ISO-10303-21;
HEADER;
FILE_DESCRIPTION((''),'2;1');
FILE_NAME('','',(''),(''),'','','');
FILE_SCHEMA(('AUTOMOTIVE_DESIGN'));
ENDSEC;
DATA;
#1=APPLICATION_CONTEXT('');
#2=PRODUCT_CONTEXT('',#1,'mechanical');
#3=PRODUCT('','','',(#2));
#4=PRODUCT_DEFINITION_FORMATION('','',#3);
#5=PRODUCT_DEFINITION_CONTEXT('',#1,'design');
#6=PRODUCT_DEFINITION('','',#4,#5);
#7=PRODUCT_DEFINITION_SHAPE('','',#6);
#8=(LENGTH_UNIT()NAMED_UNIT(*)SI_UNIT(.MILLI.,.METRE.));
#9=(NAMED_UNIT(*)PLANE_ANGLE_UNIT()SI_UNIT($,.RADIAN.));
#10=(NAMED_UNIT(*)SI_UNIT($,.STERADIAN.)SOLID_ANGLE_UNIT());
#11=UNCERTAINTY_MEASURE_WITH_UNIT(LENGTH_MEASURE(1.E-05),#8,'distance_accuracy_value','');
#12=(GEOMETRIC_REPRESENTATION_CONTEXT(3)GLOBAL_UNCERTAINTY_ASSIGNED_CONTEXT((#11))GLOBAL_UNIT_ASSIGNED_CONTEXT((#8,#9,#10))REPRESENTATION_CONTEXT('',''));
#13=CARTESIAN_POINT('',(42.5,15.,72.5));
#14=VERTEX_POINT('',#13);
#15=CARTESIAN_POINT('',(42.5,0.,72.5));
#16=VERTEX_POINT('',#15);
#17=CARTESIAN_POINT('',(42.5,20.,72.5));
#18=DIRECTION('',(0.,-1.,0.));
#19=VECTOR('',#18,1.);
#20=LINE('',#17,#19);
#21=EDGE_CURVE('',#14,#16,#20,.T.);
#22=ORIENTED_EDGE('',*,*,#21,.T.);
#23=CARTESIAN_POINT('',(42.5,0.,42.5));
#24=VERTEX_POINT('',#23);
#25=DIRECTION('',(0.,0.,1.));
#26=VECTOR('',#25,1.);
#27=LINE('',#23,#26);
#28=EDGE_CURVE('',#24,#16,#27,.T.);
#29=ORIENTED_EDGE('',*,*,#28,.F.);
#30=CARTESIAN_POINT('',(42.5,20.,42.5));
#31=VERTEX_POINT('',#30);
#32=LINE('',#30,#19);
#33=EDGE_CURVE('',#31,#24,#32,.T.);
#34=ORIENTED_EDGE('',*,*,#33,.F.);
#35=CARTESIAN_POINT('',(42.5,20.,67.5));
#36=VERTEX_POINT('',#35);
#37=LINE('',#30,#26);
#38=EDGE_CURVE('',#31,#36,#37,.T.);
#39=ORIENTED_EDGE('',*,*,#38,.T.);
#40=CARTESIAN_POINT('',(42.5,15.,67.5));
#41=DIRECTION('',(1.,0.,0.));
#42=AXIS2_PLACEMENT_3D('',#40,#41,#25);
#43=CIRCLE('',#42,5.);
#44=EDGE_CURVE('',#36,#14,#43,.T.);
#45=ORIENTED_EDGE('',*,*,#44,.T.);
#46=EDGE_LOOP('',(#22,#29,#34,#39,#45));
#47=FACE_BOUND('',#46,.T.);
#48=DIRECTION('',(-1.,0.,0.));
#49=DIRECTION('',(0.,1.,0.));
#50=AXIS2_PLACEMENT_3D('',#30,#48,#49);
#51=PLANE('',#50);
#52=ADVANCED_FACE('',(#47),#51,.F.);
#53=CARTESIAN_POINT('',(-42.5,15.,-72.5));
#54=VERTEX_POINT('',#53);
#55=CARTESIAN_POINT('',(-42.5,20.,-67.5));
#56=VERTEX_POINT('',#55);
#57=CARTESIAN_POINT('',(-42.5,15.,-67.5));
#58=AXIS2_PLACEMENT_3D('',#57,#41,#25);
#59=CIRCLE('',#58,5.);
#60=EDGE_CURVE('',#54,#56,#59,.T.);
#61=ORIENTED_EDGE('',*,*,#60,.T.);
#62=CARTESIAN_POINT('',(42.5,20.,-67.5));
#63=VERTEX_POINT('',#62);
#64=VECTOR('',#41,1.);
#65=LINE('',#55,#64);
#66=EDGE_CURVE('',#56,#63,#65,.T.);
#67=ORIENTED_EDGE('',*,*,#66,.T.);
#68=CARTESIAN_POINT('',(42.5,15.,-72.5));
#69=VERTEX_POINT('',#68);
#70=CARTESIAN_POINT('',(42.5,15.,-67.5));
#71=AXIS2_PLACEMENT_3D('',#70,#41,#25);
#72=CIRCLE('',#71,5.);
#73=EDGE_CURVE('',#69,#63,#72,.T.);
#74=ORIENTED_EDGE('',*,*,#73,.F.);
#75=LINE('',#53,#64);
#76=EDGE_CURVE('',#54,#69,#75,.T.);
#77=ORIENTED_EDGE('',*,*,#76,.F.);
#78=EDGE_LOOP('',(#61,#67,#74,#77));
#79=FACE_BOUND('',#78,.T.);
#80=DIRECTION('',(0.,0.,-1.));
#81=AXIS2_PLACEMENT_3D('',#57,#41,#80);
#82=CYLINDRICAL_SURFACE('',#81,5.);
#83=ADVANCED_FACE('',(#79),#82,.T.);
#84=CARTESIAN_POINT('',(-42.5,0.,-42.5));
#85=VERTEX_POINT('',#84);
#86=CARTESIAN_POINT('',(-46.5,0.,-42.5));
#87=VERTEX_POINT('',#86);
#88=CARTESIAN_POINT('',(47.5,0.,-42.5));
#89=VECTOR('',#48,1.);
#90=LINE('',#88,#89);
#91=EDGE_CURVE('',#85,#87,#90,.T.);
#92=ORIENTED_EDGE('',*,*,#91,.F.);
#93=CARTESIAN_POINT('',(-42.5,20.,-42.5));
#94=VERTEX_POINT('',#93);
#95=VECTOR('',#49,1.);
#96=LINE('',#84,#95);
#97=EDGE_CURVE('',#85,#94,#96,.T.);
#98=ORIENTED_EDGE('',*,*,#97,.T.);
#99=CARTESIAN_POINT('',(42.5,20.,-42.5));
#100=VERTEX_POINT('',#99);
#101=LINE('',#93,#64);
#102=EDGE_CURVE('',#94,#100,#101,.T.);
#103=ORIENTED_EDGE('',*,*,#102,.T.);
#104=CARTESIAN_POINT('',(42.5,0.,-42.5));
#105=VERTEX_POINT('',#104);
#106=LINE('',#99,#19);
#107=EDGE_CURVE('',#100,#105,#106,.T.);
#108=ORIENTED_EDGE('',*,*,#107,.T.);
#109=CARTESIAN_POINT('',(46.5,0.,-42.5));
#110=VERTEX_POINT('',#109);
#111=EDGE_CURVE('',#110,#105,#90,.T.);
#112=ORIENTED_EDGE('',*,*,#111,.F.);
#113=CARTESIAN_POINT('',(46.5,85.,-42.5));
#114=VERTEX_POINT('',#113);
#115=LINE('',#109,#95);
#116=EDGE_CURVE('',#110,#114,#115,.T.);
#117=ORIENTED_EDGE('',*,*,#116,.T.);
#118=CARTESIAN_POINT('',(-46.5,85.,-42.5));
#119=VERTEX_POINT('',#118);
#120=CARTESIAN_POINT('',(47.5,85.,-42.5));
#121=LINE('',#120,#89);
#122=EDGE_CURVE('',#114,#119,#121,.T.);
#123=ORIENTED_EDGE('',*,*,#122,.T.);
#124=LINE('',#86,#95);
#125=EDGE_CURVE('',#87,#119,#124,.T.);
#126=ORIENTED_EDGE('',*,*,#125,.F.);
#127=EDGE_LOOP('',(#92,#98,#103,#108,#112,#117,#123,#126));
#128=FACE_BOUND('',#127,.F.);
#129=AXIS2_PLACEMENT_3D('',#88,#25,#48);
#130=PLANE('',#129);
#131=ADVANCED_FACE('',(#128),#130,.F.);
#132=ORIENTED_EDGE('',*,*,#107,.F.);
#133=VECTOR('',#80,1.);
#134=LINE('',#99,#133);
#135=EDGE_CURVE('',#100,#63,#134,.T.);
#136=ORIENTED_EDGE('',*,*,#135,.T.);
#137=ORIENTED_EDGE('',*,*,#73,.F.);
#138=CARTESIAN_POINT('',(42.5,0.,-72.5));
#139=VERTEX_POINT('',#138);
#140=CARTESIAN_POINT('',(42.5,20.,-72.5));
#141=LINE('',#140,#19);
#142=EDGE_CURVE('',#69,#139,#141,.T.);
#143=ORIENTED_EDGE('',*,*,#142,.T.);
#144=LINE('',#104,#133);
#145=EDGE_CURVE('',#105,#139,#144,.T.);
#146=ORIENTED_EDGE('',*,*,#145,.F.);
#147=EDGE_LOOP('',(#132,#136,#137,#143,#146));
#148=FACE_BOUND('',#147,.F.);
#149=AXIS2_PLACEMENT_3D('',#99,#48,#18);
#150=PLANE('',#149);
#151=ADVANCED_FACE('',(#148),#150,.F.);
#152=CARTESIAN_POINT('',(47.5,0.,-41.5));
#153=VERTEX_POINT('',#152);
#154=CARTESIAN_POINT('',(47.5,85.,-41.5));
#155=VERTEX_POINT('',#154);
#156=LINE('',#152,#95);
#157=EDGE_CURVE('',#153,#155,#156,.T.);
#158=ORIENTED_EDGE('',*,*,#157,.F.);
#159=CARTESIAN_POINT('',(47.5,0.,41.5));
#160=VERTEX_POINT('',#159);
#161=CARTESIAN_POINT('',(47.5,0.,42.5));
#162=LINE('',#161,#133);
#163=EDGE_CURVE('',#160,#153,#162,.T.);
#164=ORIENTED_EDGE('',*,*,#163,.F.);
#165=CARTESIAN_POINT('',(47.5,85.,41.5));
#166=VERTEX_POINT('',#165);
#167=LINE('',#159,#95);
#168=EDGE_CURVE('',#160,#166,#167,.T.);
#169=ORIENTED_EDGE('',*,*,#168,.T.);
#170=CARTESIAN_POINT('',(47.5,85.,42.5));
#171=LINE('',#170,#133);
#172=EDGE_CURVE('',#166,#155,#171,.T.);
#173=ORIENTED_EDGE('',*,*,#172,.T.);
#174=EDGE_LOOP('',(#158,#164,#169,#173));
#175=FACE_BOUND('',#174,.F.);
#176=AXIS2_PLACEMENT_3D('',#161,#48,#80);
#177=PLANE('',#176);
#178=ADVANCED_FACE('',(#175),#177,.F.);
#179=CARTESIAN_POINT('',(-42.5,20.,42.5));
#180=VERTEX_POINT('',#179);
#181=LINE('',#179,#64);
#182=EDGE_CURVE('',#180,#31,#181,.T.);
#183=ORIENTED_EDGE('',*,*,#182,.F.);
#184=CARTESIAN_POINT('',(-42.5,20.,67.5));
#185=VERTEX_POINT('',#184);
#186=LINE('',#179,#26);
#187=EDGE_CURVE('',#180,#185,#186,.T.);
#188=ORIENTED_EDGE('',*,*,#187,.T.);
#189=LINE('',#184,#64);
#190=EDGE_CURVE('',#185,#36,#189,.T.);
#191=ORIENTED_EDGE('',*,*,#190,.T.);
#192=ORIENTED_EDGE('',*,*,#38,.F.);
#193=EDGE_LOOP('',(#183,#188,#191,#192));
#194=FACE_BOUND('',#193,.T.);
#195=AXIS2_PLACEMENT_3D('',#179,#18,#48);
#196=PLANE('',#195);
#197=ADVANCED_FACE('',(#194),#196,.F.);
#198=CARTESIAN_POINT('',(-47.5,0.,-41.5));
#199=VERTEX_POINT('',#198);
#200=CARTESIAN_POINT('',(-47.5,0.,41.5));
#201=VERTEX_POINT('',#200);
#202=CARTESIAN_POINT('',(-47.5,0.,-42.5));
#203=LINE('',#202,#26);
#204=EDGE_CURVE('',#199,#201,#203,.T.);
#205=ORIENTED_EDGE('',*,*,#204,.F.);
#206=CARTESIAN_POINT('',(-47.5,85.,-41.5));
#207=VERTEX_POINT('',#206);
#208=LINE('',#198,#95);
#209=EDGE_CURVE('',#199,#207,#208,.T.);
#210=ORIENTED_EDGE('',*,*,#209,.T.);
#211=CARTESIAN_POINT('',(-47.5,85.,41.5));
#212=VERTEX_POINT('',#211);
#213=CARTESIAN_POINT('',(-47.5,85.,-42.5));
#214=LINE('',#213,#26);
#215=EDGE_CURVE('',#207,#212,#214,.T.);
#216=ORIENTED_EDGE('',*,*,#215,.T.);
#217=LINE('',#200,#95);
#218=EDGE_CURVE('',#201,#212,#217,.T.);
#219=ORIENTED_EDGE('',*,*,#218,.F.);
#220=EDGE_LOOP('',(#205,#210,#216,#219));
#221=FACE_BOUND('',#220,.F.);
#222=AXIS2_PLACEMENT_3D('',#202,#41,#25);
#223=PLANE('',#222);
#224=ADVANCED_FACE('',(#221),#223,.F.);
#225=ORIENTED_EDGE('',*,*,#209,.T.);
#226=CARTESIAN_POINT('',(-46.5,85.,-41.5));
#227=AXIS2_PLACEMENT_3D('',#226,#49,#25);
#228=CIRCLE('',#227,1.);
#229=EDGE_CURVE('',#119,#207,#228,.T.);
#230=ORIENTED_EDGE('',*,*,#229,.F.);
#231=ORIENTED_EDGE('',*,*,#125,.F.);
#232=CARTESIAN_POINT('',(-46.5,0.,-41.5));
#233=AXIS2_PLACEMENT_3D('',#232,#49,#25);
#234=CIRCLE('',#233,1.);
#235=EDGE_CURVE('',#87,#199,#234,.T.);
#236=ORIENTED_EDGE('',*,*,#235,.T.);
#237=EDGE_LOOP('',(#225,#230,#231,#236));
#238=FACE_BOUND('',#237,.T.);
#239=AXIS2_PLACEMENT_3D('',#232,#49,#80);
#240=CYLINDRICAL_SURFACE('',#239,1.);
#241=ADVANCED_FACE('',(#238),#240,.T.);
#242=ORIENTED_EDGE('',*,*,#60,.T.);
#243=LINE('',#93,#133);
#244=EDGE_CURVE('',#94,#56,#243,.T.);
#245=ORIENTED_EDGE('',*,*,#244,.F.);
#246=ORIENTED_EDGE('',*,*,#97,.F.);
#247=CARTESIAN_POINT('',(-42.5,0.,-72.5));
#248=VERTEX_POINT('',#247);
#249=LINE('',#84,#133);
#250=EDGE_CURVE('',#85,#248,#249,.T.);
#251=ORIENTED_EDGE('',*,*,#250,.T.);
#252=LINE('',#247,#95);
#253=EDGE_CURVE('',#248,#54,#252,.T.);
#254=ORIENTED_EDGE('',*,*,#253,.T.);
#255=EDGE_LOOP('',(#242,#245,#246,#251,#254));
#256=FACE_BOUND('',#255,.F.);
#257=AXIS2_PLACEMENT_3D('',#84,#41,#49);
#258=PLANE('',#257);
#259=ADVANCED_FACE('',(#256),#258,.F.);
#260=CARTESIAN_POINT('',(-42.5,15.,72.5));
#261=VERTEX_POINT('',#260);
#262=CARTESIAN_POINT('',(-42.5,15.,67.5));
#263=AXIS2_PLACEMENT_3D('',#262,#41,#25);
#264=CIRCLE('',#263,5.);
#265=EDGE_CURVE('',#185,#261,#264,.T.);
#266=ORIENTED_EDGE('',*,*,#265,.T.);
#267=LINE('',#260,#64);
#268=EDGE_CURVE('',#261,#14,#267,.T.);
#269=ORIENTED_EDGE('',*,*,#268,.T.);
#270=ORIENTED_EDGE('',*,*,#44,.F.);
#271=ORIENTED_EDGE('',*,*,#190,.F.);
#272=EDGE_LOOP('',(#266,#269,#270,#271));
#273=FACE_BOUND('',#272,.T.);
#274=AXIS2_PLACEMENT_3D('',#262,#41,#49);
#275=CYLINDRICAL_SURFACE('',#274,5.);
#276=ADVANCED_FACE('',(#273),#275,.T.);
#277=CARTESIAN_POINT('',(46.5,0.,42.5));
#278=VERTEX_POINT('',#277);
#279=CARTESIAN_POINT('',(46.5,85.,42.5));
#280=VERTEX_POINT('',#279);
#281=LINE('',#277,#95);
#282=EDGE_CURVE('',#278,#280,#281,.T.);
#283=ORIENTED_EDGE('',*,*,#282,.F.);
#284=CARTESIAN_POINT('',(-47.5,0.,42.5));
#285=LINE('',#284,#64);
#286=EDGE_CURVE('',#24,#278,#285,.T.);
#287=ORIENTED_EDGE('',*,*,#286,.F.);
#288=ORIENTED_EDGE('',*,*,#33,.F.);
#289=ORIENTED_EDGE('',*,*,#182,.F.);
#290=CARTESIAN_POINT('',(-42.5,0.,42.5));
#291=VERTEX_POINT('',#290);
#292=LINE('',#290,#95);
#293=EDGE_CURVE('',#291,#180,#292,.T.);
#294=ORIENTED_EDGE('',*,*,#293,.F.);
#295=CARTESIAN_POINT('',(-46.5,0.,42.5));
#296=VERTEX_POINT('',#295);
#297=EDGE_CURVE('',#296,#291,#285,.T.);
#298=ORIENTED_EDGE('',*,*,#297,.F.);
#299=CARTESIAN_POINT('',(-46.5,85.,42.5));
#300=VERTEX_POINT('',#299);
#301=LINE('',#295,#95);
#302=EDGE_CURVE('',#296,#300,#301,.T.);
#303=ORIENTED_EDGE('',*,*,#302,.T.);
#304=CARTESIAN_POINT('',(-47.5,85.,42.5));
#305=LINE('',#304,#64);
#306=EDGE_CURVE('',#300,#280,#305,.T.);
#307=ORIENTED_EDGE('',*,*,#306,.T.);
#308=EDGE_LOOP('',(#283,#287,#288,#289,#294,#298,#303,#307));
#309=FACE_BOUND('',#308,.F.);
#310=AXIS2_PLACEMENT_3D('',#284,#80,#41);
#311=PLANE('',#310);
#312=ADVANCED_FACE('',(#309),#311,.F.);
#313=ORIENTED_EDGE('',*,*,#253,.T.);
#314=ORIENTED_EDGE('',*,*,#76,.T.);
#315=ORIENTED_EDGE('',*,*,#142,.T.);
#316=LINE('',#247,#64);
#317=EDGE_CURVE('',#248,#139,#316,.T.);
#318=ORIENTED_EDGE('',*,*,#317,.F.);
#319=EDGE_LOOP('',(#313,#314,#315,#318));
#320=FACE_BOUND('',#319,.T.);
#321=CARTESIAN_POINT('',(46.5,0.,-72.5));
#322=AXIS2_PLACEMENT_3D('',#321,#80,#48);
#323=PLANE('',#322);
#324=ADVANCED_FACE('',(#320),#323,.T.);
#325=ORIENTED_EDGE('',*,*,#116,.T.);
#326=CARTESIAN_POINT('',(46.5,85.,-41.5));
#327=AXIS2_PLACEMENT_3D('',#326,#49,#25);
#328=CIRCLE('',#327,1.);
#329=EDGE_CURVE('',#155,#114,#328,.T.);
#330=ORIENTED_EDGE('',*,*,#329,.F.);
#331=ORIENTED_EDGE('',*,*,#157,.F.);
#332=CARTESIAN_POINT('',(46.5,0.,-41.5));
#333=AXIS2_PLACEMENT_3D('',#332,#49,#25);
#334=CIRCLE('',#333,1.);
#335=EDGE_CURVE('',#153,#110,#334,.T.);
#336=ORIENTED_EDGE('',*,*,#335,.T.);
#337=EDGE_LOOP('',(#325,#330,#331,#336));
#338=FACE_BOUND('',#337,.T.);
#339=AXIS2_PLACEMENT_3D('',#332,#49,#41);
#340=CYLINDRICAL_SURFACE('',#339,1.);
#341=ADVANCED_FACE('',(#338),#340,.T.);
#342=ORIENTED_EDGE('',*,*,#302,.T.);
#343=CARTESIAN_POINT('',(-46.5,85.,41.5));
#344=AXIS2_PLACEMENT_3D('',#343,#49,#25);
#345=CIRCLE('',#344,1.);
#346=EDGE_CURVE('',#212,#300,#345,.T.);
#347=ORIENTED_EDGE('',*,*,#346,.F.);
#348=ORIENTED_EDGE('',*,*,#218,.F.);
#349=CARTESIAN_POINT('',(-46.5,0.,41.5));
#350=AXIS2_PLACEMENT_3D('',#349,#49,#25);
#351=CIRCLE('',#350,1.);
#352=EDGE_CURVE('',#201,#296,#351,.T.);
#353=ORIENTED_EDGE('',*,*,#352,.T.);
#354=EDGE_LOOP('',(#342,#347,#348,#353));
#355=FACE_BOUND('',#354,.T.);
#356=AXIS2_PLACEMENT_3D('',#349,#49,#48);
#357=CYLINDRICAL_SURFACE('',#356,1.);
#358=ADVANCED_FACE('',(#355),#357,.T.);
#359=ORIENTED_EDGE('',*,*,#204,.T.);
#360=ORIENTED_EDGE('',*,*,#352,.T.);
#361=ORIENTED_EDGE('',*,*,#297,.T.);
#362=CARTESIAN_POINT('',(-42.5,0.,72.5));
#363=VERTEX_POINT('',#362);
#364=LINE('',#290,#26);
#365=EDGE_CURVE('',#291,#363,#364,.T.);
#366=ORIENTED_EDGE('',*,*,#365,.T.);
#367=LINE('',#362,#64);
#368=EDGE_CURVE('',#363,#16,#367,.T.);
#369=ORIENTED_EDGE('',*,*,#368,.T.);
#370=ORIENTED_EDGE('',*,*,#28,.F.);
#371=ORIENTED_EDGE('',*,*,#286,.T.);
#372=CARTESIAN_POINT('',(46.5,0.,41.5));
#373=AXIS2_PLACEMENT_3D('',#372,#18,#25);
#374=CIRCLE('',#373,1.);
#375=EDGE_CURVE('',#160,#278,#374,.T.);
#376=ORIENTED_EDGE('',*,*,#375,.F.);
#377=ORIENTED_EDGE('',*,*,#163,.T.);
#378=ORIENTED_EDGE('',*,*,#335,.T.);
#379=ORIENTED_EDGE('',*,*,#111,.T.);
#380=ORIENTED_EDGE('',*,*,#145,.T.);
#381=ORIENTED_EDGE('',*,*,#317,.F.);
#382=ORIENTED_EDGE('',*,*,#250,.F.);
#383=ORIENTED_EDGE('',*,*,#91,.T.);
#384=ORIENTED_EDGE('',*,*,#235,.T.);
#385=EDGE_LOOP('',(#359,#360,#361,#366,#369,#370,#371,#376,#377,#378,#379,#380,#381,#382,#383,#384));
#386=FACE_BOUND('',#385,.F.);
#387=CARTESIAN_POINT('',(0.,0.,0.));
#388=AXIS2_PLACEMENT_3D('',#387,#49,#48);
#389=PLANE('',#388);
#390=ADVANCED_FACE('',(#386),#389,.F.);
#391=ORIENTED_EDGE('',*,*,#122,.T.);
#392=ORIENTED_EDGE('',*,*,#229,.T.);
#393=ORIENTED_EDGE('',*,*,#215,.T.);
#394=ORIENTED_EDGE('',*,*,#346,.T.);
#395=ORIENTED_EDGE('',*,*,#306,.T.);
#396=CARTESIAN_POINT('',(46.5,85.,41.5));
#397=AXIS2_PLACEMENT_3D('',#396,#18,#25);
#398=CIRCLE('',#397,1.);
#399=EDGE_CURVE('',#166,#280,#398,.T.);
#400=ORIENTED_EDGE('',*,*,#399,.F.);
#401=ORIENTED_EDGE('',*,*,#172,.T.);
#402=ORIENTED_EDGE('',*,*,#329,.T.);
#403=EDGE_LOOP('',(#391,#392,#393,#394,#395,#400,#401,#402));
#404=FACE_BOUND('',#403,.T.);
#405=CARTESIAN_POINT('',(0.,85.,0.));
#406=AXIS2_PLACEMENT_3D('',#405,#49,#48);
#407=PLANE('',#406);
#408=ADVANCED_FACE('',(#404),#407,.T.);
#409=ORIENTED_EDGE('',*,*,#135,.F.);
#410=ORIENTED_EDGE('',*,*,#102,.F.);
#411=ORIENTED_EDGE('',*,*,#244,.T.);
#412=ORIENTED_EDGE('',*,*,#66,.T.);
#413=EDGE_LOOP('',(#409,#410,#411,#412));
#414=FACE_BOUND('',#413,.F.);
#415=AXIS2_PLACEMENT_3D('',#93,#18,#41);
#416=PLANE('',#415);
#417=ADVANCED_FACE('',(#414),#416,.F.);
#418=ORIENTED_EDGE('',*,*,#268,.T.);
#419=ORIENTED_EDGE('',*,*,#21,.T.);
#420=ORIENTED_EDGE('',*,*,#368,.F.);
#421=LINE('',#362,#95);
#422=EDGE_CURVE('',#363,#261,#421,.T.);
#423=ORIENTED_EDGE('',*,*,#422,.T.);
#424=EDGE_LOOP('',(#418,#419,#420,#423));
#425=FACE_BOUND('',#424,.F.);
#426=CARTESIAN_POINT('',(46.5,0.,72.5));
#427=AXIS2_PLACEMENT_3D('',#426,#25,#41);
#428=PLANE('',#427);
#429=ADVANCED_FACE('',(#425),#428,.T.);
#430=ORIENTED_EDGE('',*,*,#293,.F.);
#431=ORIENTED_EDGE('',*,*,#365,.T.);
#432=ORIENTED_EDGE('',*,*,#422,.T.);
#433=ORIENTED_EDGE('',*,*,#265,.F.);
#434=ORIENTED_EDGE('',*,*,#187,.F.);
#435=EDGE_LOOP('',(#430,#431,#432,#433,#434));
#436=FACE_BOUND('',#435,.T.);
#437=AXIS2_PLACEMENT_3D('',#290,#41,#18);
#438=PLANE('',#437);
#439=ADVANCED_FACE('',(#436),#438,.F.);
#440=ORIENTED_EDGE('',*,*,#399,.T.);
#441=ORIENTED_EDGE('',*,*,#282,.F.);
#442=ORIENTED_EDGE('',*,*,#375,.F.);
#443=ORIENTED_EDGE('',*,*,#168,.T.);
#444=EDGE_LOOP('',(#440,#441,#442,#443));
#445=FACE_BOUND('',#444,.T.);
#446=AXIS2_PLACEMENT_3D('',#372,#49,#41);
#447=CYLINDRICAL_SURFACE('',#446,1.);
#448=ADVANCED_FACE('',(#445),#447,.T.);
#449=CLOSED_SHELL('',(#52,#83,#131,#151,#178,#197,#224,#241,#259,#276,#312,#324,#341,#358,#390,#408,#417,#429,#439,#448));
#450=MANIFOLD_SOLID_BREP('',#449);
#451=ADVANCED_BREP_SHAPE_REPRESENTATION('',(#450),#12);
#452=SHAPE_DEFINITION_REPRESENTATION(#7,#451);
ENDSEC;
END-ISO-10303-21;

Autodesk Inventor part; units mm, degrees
ref_plane "YZ Plane" through (0, 0, 0) normal (1, 0, 0) x (0, 1, 0)
ref_plane "XZ Plane" through (0, 0, 0) normal (0, 1, 0) x (-1, 0, 0)
ref_plane "XY Plane" through (0, 0, 0) normal (0, 0, 1) x (1, 0, 0)
sketch "Sketch1" plane through (0, 0, 0) normal (0, 1, 0) x (-1, 0, 0)
  line L0 (47.5, 42.5) -> (-47.5, 42.5)
  line L1 (-47.5, 42.5) -> (-47.5, -42.5)
  line L2 (-47.5, -42.5) -> (47.5, -42.5)
  line L3 (47.5, -42.5) -> (47.5, 42.5)
  line L4 (47.5, 42.5) -> (-47.5, -42.5) construction
  line L5 (-47.5, 42.5) -> (47.5, -42.5) construction
  point P0 (0, 0)
  dimension "d0" = 95
  dimension "d1" = 85
extrude "Extrusion1" add sketch "Sketch1" along normal blind 85
fillet "Face Fillet1" radius 1 1 edges at (47.5, 42.5, 42.5)
fillet "Face Fillet2" radius 1 1 edges at (47.5, 42.5, -42.5)
fillet "Face Fillet3" radius 1 1 edges at (-47.5, 42.5, -42.5)
fillet "Face Fillet4" radius 1 1 edges at (-47.5, 42.5, 42.5)
sketch "Sketch2" plane through (46.5, 0, -42.5) normal (0, 0, -1) x (-1, 0, 0)
  line L0 (89, 0) -> (89, 20)
  line L1 (89, 20) -> (4, 20)
  line L2 (4, 20) -> (4, 0)
  line L3 (89, 0) -> (4, 0)
  point P0 (46.5, 0)
  point P1 (94, 0)
  dimension "d9" = 20
  dimension "d10" = 85
extrude "Extrusion2" add sketch "Sketch2" along normal blind 30
mirror "Mirror1" about plane through (0, 0, 0) normal (0, 0, 1) of "Extrusion2"
fillet "Face Fillet5" radius 5 1 edges at (0, 20, 72.5)
fillet "Face Fillet6" radius 5 1 edges at (0, 20, -72.5)
sketch "Sketch3" plane through (-47.5, 0, -41.5) normal (-1, 0, 0) x (0, 0, 1)
  point P0 (41.5, 0)
properties part number "base_of_linear_motor"
